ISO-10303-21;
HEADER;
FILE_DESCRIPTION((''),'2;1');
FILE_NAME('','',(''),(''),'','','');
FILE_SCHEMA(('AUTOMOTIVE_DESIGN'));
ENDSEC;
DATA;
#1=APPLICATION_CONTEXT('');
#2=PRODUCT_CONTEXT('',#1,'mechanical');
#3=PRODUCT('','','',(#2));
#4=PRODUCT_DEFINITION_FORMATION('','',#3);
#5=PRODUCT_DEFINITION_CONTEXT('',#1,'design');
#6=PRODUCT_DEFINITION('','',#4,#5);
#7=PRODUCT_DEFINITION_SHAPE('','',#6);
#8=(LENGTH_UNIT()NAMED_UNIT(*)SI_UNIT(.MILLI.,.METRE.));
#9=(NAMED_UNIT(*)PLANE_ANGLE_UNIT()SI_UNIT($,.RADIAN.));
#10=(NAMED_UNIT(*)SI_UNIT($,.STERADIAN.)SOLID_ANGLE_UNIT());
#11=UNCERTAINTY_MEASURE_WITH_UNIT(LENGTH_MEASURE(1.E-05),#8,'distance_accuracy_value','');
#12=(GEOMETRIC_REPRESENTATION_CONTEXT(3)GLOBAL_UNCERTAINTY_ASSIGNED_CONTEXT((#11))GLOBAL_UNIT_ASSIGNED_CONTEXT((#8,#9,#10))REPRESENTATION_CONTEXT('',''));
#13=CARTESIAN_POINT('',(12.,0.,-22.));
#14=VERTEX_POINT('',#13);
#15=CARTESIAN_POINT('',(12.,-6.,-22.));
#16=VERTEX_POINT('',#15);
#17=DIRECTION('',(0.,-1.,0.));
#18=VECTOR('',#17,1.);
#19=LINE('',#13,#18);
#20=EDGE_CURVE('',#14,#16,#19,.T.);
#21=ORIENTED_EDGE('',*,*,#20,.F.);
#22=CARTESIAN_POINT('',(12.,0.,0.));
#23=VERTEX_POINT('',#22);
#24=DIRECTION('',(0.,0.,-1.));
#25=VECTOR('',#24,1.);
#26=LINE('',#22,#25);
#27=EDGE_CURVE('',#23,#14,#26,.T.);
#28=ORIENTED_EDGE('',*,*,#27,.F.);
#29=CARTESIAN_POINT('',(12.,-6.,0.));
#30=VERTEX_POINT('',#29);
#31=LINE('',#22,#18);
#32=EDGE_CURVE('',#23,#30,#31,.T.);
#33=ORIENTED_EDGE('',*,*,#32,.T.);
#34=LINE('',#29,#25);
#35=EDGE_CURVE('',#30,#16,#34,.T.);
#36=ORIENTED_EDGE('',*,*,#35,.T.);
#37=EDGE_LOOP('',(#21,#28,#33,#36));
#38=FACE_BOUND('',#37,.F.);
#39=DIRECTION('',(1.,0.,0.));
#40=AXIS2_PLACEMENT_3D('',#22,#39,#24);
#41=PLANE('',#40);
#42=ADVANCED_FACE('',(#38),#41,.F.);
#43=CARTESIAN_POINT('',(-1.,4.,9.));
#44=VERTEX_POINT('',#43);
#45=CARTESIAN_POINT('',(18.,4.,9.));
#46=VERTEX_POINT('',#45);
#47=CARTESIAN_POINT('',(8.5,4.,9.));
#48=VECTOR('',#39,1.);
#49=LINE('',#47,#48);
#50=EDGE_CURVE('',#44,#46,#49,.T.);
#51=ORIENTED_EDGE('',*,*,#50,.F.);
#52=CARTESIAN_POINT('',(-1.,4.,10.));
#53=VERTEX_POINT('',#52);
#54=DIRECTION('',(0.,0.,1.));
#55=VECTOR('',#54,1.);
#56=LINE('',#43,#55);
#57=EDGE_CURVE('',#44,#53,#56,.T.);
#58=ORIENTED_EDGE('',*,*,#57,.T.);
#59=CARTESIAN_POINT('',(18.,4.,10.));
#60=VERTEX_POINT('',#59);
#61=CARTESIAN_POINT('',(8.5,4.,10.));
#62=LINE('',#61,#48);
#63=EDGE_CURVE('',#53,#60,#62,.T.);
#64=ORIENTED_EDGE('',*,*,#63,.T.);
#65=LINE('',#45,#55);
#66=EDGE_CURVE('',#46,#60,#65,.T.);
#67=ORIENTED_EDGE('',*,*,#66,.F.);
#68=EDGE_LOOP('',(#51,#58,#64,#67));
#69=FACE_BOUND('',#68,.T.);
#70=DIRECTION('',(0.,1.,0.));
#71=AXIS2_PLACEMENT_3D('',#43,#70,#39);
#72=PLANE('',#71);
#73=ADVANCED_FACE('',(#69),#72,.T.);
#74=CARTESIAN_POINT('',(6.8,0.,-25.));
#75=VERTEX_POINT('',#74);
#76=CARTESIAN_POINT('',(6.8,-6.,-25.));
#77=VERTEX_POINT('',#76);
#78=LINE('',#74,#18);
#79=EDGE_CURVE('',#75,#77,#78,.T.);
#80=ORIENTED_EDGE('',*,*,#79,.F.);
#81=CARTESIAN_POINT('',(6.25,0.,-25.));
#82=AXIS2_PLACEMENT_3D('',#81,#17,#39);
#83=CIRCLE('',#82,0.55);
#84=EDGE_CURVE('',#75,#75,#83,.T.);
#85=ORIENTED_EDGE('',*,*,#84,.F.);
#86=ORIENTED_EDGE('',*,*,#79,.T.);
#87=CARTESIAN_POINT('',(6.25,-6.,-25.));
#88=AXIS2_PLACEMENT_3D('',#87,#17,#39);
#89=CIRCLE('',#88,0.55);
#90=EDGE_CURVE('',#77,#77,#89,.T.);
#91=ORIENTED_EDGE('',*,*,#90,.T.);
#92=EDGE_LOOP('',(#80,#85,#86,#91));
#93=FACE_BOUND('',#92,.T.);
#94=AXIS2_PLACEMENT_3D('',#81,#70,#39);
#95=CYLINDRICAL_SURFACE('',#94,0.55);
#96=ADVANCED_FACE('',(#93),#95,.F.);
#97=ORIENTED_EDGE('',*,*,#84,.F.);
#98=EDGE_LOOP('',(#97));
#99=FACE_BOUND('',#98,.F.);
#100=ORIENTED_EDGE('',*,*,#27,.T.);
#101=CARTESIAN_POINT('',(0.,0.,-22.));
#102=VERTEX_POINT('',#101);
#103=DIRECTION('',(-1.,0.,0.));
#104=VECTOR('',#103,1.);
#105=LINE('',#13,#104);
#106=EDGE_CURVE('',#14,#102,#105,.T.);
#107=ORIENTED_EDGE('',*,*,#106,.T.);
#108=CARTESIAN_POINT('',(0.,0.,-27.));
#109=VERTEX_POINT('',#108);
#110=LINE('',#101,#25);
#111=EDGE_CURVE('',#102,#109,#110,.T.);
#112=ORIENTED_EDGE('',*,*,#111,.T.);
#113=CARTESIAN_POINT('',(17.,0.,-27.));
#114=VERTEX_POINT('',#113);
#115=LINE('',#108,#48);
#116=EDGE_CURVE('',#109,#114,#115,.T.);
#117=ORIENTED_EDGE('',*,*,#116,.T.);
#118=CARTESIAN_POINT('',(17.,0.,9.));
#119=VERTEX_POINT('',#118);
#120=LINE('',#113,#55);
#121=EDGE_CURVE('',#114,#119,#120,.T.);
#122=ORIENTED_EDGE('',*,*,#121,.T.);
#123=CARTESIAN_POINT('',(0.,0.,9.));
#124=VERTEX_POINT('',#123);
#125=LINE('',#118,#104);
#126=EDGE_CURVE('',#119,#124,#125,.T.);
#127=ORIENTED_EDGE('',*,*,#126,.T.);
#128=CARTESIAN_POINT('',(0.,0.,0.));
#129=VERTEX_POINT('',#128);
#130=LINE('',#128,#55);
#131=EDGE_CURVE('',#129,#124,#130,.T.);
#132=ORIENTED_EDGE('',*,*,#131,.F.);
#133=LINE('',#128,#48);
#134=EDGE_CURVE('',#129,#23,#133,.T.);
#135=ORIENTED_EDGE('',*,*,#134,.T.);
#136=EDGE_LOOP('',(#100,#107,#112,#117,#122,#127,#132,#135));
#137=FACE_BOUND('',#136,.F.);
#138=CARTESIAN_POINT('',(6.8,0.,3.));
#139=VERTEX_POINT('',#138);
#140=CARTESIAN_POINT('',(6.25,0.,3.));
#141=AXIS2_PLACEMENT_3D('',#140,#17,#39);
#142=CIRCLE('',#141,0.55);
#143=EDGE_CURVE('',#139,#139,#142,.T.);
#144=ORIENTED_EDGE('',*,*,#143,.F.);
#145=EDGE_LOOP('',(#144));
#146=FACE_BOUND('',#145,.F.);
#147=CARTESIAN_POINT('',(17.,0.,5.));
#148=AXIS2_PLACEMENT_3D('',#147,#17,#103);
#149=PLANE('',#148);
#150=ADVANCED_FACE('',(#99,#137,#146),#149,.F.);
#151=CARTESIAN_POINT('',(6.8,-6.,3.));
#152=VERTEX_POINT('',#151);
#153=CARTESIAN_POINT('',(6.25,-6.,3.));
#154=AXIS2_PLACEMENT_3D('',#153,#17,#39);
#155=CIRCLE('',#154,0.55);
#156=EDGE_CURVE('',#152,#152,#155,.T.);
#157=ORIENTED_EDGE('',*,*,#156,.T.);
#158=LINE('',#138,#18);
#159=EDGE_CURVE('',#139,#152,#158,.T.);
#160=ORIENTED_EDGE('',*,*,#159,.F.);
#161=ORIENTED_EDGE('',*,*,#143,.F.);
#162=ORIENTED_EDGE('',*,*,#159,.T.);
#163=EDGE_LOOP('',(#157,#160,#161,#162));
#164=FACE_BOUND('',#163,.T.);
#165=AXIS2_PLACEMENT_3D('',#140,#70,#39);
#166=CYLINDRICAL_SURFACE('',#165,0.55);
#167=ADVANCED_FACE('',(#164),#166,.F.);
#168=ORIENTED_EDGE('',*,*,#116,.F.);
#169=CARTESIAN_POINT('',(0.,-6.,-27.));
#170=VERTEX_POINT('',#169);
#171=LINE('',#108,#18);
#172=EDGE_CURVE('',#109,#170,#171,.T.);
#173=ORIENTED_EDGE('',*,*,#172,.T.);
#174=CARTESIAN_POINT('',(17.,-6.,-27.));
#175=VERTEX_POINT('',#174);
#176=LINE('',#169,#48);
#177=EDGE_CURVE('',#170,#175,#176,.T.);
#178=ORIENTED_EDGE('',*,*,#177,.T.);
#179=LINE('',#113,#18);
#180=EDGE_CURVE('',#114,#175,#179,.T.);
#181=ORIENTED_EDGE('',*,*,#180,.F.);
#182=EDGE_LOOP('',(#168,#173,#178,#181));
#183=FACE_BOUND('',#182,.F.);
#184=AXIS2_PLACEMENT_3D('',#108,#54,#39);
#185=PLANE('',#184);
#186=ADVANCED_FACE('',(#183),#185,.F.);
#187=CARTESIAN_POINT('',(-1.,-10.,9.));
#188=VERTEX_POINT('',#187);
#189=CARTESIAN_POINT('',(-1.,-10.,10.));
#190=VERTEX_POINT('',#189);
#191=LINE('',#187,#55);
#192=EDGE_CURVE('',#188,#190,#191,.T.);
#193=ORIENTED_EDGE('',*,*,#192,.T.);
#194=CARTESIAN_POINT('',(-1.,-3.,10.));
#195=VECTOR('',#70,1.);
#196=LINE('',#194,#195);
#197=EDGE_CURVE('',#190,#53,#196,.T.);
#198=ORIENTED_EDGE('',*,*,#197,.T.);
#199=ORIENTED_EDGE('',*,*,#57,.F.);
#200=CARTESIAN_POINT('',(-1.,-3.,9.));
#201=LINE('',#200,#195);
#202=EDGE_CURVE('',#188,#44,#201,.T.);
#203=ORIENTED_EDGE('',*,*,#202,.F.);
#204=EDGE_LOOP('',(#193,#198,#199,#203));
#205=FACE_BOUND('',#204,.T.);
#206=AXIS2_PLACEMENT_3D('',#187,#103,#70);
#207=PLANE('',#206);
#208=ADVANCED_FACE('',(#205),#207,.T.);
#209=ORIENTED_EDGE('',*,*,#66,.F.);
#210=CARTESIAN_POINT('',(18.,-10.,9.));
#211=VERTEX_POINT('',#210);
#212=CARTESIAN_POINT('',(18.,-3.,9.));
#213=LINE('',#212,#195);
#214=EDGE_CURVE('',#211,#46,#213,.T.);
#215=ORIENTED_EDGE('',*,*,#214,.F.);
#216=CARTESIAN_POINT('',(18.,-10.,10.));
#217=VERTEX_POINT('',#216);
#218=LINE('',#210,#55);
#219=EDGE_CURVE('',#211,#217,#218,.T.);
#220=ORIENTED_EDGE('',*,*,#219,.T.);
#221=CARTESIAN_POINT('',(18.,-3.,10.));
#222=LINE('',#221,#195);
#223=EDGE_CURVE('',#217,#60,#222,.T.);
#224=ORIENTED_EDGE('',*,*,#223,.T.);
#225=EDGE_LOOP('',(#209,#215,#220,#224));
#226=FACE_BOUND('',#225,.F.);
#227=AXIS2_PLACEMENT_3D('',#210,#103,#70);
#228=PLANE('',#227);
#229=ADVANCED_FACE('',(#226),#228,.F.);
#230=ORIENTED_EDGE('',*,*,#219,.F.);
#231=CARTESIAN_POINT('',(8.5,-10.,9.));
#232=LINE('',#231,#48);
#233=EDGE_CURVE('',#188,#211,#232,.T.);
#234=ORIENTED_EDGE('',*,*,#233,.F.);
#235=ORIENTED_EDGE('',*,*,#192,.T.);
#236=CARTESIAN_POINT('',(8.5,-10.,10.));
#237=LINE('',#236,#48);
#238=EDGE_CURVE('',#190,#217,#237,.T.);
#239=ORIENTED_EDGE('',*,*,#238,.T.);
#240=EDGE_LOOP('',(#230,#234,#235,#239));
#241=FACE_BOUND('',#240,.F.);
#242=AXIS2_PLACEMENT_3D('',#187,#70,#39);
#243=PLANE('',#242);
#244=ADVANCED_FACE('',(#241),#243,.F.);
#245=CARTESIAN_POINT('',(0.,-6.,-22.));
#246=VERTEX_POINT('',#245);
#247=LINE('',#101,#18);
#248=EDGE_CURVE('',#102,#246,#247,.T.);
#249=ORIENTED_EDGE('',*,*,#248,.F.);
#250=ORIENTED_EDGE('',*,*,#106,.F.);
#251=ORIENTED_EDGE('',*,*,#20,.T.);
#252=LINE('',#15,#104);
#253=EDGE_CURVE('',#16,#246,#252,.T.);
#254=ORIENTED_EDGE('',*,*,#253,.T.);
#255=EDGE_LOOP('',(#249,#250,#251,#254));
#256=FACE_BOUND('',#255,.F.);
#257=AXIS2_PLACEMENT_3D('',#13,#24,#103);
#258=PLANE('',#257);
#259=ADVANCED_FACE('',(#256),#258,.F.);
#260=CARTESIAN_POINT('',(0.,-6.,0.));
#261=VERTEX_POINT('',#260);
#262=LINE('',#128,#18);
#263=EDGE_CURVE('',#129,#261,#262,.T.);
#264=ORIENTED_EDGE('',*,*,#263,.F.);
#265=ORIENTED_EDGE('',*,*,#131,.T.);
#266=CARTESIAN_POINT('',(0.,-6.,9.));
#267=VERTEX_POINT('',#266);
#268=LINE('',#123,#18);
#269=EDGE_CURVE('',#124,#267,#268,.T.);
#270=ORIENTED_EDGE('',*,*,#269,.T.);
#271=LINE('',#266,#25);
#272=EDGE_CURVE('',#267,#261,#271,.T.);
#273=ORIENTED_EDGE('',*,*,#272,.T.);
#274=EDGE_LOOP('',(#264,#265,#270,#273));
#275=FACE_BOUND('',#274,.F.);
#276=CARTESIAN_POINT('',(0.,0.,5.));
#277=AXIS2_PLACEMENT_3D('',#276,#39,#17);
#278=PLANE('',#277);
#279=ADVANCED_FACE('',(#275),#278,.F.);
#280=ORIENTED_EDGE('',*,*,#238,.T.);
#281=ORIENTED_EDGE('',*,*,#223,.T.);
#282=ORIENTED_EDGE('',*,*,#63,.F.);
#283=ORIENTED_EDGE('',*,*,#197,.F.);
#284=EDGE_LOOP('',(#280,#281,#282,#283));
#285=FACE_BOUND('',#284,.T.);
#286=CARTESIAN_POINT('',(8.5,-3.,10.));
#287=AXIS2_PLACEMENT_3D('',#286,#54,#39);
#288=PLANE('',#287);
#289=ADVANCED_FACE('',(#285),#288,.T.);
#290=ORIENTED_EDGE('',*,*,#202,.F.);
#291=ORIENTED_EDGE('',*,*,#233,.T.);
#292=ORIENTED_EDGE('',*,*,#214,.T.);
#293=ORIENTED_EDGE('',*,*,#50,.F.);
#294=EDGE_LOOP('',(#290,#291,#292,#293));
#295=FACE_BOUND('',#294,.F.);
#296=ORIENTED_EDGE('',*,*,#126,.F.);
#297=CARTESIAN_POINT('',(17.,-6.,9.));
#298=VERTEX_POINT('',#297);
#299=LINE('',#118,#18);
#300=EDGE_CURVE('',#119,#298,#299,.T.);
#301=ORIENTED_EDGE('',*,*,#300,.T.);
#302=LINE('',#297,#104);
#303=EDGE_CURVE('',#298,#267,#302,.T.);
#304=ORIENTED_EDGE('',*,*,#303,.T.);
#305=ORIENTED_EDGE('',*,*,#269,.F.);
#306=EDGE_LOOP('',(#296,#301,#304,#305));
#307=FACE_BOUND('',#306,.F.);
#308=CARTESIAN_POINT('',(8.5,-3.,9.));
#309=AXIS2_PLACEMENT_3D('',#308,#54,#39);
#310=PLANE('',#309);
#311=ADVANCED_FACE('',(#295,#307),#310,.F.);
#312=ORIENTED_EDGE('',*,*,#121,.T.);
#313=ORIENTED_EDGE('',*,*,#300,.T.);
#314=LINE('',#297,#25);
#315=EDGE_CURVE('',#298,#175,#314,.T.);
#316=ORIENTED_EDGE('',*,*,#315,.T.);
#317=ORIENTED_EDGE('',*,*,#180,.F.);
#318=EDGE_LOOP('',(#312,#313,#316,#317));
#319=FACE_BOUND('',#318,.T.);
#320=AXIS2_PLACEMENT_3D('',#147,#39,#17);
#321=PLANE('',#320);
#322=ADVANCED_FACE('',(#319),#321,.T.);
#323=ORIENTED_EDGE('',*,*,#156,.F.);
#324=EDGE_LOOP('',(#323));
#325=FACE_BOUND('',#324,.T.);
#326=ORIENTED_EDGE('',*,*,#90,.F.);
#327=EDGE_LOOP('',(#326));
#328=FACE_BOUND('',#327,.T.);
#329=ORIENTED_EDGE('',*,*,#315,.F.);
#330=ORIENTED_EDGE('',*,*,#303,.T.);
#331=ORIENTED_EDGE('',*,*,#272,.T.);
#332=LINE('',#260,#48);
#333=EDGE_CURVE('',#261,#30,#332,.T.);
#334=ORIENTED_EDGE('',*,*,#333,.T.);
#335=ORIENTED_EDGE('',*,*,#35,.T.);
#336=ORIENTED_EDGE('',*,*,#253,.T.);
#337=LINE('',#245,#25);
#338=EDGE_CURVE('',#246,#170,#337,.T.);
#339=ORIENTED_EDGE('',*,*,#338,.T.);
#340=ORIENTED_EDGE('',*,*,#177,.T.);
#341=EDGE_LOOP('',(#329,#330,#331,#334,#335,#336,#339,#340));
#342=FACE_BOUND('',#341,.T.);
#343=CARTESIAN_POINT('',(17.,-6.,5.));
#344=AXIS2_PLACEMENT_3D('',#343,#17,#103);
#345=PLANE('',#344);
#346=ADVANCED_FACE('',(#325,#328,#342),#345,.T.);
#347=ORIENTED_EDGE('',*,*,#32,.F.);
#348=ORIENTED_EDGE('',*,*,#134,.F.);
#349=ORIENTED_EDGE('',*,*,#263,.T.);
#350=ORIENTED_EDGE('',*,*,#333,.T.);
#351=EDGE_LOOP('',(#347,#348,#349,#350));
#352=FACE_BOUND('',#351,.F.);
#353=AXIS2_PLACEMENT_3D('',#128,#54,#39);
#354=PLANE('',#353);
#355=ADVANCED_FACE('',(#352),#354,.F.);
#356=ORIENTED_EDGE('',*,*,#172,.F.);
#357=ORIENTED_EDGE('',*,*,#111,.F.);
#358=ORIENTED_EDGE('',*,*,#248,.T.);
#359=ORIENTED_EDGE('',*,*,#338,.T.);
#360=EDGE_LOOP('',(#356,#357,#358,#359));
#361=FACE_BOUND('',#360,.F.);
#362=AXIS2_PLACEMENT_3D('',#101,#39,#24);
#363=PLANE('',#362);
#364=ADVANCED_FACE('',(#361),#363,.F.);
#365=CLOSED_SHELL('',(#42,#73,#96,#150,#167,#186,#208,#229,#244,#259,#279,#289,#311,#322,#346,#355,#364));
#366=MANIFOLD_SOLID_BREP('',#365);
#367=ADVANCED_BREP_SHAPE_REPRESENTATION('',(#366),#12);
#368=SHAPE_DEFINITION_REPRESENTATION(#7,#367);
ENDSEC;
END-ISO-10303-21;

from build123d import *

# Parameters (mm, degrees)
F0_R     = 0.55
F1_DEPTH = 6
F2_DEPTH = 4
F3_W     = 19
F3_H     = 14
F3_W_2   = 17
F3_H_2   = 6
F4_DEPTH = 1


with BuildPart() as f1:
    # F0 (on Front) → F1 (new body)
    with BuildSketch(Plane.XZ):
        Polygon((0, 5), (0, 0), (12, 0), (12, -22), (0, -22), (0, -27), (12, -27), (17, -27), (17, 5), (12, 5), align=None)
        with Locations((6.25, -25)):
            Circle(F0_R, mode=Mode.SUBTRACT)
        with Locations((6.25, 3)):
            Circle(F0_R, mode=Mode.SUBTRACT)
    extrude(amount=F1_DEPTH)

    # F2 (add): a face of the model
    f2_faces = [f1.faces().sort_by_distance(p)[0] for p in [
        (8.5, -3, 5),
    ]]
    extrude(f2_faces, amount=F2_DEPTH)

    # F3 (on face) → F4 (join)
    with BuildSketch(Plane.XY.offset(9)):
        with Locations((8.5, -3)):
            Rectangle(F3_W, F3_H)
        with Locations((8.5, -3)):
            Rectangle(F3_W_2, F3_H_2, mode=Mode.SUBTRACT)
        with Locations((8.5, -3)):
            Rectangle(F3_W_2, F3_H_2)
    extrude(amount=F4_DEPTH)


solid = f1.part
